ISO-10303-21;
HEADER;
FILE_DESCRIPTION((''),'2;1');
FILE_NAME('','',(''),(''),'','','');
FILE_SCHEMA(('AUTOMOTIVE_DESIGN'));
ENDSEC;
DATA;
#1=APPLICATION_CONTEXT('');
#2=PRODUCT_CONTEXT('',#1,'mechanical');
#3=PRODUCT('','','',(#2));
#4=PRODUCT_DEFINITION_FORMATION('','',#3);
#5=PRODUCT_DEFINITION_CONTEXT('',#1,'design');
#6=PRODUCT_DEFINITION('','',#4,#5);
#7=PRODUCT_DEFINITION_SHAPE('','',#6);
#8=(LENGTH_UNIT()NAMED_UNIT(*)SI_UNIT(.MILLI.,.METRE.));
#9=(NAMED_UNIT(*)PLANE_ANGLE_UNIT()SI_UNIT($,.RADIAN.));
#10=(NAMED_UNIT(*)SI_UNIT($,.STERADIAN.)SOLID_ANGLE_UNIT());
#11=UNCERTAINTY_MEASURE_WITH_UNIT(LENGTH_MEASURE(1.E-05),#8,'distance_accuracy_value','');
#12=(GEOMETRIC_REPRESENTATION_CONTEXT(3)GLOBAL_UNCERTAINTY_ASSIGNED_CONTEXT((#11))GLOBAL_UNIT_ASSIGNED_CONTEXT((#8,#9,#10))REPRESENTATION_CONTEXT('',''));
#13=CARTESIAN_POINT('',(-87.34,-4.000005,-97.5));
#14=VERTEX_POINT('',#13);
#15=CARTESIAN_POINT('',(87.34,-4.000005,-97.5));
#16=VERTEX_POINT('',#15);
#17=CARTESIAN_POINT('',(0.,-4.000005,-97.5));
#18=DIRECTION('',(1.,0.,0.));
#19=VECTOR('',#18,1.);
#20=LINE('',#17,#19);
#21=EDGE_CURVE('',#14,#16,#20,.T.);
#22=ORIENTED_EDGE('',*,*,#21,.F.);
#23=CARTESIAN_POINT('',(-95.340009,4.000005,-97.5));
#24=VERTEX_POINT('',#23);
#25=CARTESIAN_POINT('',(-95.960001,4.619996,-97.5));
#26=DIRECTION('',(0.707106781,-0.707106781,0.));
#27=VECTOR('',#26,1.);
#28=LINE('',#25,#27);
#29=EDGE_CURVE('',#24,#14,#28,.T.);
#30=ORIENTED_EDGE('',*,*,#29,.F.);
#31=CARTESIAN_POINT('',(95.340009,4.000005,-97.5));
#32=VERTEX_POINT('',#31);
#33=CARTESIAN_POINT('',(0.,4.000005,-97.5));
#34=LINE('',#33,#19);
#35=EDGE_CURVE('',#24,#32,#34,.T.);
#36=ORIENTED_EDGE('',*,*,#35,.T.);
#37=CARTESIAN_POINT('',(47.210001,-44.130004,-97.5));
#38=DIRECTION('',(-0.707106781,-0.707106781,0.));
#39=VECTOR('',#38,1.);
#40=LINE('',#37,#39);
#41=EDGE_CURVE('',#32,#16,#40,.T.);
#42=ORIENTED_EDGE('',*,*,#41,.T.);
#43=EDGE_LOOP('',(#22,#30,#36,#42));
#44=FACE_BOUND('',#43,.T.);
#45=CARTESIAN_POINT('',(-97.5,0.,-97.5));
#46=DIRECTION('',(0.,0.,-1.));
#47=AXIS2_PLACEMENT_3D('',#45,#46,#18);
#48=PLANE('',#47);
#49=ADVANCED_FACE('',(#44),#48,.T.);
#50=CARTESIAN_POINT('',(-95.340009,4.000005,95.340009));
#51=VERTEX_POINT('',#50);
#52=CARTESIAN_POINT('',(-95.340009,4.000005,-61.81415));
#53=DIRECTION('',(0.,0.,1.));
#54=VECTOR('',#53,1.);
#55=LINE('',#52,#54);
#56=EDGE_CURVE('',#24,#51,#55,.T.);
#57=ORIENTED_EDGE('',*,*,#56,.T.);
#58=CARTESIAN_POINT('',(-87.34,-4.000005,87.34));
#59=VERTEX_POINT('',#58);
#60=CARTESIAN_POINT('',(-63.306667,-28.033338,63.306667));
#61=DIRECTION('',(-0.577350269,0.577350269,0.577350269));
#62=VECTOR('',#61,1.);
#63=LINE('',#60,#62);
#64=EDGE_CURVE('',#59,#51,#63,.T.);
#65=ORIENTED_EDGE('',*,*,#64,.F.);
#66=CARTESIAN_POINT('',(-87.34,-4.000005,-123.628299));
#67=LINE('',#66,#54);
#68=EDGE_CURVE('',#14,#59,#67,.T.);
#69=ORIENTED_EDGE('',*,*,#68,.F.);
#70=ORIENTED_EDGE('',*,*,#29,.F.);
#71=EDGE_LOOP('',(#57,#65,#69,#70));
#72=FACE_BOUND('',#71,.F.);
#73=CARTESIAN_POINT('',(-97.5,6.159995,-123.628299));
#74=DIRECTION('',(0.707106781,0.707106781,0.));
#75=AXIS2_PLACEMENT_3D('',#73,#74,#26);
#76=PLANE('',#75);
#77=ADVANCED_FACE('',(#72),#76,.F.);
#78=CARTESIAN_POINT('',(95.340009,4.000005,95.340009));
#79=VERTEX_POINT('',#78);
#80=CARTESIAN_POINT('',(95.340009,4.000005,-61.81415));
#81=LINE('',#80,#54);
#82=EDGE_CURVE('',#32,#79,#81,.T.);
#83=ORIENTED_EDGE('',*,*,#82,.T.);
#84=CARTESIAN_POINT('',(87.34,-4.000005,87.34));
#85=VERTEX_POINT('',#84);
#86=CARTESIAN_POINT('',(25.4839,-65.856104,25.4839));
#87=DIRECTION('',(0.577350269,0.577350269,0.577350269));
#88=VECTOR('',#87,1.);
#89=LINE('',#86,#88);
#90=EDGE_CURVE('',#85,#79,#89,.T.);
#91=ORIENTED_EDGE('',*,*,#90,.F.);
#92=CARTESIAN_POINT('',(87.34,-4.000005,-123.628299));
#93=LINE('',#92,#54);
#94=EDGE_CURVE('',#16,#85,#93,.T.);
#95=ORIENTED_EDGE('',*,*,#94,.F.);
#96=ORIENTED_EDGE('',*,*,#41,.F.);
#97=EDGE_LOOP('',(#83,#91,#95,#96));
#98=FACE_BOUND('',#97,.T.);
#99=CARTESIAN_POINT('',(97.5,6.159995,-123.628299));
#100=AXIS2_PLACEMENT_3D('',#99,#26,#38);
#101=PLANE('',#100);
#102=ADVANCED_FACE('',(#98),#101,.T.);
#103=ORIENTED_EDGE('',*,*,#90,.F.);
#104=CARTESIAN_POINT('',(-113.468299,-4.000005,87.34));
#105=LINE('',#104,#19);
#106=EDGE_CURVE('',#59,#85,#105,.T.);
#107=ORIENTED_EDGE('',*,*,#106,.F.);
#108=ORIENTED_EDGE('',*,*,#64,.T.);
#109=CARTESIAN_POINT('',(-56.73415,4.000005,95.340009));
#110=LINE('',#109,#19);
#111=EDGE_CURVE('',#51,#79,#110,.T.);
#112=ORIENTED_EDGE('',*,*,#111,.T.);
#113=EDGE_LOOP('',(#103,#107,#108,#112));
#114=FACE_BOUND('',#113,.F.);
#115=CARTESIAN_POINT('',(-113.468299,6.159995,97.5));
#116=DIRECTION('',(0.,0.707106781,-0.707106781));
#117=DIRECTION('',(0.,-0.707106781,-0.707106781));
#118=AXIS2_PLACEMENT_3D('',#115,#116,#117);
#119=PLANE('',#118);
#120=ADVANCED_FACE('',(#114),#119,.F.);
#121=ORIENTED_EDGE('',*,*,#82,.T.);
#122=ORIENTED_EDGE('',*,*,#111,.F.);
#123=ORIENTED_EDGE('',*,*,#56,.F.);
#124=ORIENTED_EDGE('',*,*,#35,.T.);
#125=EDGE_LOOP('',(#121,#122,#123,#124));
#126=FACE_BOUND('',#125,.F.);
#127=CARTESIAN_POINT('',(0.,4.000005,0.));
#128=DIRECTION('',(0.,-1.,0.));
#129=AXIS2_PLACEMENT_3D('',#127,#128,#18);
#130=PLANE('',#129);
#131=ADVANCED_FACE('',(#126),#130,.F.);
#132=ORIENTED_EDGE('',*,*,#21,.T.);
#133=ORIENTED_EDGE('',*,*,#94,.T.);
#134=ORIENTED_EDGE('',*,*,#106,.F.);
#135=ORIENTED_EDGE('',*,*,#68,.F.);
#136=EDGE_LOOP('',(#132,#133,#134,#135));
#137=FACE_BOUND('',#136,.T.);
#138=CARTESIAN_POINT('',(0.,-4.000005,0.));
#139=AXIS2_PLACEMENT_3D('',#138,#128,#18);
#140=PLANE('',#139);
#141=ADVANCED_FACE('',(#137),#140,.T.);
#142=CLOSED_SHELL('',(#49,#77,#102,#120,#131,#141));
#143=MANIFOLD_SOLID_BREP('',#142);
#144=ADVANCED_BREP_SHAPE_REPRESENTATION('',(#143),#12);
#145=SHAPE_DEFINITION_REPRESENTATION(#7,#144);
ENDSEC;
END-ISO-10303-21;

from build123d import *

# Parameters (mm, degrees)
F0_W        = 195
F0_H        = 195
F1_DEPTH    = 4.0000047
F2_T1_DEPTH = 247.2565983155
F3_T1_DEPTH = 247.2565983155
F4_T1_DEPTH = 226.9365983155


# Not quite as in the source:
# - a fillet or chamfer that OpenCascade refuses, or shapes differently, is made with other operations: its cross-section is extruded or revolved along the edge and cut away or added


with BuildPart() as f1:
    # F0 (on Front) → F1 (new body, symmetric)
    with BuildSketch(Plane.XZ):
        Rectangle(F0_W, F0_H)
    extrude(amount=F1_DEPTH, both=True)

    # F2: chamfer of 10.16 on 1 edges, made by hand

    # F2_s2 → F2_t1 (cut)
    with BuildSketch(Plane.XY.offset(-123.6282991577)):
        Polygon((97.5, 6.1599953), (87.34, -4.0000047), (97.5, -4.0000047), align=None)
    extrude(amount=F2_T1_DEPTH, mode=Mode.SUBTRACT)

    # F3: chamfer of 10.16 on 1 edges, made by hand

    # F3_s2 → F3_t1 (cut)
    with BuildSketch(Plane.XY.offset(-123.6282991577)):
        Polygon((-97.5, 6.1599953), (-87.34, -4.0000047), (-97.5, -4.0000047), align=None)
    extrude(amount=F3_T1_DEPTH, mode=Mode.SUBTRACT)

    # F4: chamfer of 10.16 on 1 edges, made by hand

    # F4_s2 → F4_t1 (cut)
    with BuildSketch(Plane.YZ.offset(-113.4682991577)):
        Polygon((6.1599953, 97.5), (-4.0000047, 87.34), (-4.0000047, 97.5), align=None)
    extrude(amount=F4_T1_DEPTH, mode=Mode.SUBTRACT)


solid = f1.part
